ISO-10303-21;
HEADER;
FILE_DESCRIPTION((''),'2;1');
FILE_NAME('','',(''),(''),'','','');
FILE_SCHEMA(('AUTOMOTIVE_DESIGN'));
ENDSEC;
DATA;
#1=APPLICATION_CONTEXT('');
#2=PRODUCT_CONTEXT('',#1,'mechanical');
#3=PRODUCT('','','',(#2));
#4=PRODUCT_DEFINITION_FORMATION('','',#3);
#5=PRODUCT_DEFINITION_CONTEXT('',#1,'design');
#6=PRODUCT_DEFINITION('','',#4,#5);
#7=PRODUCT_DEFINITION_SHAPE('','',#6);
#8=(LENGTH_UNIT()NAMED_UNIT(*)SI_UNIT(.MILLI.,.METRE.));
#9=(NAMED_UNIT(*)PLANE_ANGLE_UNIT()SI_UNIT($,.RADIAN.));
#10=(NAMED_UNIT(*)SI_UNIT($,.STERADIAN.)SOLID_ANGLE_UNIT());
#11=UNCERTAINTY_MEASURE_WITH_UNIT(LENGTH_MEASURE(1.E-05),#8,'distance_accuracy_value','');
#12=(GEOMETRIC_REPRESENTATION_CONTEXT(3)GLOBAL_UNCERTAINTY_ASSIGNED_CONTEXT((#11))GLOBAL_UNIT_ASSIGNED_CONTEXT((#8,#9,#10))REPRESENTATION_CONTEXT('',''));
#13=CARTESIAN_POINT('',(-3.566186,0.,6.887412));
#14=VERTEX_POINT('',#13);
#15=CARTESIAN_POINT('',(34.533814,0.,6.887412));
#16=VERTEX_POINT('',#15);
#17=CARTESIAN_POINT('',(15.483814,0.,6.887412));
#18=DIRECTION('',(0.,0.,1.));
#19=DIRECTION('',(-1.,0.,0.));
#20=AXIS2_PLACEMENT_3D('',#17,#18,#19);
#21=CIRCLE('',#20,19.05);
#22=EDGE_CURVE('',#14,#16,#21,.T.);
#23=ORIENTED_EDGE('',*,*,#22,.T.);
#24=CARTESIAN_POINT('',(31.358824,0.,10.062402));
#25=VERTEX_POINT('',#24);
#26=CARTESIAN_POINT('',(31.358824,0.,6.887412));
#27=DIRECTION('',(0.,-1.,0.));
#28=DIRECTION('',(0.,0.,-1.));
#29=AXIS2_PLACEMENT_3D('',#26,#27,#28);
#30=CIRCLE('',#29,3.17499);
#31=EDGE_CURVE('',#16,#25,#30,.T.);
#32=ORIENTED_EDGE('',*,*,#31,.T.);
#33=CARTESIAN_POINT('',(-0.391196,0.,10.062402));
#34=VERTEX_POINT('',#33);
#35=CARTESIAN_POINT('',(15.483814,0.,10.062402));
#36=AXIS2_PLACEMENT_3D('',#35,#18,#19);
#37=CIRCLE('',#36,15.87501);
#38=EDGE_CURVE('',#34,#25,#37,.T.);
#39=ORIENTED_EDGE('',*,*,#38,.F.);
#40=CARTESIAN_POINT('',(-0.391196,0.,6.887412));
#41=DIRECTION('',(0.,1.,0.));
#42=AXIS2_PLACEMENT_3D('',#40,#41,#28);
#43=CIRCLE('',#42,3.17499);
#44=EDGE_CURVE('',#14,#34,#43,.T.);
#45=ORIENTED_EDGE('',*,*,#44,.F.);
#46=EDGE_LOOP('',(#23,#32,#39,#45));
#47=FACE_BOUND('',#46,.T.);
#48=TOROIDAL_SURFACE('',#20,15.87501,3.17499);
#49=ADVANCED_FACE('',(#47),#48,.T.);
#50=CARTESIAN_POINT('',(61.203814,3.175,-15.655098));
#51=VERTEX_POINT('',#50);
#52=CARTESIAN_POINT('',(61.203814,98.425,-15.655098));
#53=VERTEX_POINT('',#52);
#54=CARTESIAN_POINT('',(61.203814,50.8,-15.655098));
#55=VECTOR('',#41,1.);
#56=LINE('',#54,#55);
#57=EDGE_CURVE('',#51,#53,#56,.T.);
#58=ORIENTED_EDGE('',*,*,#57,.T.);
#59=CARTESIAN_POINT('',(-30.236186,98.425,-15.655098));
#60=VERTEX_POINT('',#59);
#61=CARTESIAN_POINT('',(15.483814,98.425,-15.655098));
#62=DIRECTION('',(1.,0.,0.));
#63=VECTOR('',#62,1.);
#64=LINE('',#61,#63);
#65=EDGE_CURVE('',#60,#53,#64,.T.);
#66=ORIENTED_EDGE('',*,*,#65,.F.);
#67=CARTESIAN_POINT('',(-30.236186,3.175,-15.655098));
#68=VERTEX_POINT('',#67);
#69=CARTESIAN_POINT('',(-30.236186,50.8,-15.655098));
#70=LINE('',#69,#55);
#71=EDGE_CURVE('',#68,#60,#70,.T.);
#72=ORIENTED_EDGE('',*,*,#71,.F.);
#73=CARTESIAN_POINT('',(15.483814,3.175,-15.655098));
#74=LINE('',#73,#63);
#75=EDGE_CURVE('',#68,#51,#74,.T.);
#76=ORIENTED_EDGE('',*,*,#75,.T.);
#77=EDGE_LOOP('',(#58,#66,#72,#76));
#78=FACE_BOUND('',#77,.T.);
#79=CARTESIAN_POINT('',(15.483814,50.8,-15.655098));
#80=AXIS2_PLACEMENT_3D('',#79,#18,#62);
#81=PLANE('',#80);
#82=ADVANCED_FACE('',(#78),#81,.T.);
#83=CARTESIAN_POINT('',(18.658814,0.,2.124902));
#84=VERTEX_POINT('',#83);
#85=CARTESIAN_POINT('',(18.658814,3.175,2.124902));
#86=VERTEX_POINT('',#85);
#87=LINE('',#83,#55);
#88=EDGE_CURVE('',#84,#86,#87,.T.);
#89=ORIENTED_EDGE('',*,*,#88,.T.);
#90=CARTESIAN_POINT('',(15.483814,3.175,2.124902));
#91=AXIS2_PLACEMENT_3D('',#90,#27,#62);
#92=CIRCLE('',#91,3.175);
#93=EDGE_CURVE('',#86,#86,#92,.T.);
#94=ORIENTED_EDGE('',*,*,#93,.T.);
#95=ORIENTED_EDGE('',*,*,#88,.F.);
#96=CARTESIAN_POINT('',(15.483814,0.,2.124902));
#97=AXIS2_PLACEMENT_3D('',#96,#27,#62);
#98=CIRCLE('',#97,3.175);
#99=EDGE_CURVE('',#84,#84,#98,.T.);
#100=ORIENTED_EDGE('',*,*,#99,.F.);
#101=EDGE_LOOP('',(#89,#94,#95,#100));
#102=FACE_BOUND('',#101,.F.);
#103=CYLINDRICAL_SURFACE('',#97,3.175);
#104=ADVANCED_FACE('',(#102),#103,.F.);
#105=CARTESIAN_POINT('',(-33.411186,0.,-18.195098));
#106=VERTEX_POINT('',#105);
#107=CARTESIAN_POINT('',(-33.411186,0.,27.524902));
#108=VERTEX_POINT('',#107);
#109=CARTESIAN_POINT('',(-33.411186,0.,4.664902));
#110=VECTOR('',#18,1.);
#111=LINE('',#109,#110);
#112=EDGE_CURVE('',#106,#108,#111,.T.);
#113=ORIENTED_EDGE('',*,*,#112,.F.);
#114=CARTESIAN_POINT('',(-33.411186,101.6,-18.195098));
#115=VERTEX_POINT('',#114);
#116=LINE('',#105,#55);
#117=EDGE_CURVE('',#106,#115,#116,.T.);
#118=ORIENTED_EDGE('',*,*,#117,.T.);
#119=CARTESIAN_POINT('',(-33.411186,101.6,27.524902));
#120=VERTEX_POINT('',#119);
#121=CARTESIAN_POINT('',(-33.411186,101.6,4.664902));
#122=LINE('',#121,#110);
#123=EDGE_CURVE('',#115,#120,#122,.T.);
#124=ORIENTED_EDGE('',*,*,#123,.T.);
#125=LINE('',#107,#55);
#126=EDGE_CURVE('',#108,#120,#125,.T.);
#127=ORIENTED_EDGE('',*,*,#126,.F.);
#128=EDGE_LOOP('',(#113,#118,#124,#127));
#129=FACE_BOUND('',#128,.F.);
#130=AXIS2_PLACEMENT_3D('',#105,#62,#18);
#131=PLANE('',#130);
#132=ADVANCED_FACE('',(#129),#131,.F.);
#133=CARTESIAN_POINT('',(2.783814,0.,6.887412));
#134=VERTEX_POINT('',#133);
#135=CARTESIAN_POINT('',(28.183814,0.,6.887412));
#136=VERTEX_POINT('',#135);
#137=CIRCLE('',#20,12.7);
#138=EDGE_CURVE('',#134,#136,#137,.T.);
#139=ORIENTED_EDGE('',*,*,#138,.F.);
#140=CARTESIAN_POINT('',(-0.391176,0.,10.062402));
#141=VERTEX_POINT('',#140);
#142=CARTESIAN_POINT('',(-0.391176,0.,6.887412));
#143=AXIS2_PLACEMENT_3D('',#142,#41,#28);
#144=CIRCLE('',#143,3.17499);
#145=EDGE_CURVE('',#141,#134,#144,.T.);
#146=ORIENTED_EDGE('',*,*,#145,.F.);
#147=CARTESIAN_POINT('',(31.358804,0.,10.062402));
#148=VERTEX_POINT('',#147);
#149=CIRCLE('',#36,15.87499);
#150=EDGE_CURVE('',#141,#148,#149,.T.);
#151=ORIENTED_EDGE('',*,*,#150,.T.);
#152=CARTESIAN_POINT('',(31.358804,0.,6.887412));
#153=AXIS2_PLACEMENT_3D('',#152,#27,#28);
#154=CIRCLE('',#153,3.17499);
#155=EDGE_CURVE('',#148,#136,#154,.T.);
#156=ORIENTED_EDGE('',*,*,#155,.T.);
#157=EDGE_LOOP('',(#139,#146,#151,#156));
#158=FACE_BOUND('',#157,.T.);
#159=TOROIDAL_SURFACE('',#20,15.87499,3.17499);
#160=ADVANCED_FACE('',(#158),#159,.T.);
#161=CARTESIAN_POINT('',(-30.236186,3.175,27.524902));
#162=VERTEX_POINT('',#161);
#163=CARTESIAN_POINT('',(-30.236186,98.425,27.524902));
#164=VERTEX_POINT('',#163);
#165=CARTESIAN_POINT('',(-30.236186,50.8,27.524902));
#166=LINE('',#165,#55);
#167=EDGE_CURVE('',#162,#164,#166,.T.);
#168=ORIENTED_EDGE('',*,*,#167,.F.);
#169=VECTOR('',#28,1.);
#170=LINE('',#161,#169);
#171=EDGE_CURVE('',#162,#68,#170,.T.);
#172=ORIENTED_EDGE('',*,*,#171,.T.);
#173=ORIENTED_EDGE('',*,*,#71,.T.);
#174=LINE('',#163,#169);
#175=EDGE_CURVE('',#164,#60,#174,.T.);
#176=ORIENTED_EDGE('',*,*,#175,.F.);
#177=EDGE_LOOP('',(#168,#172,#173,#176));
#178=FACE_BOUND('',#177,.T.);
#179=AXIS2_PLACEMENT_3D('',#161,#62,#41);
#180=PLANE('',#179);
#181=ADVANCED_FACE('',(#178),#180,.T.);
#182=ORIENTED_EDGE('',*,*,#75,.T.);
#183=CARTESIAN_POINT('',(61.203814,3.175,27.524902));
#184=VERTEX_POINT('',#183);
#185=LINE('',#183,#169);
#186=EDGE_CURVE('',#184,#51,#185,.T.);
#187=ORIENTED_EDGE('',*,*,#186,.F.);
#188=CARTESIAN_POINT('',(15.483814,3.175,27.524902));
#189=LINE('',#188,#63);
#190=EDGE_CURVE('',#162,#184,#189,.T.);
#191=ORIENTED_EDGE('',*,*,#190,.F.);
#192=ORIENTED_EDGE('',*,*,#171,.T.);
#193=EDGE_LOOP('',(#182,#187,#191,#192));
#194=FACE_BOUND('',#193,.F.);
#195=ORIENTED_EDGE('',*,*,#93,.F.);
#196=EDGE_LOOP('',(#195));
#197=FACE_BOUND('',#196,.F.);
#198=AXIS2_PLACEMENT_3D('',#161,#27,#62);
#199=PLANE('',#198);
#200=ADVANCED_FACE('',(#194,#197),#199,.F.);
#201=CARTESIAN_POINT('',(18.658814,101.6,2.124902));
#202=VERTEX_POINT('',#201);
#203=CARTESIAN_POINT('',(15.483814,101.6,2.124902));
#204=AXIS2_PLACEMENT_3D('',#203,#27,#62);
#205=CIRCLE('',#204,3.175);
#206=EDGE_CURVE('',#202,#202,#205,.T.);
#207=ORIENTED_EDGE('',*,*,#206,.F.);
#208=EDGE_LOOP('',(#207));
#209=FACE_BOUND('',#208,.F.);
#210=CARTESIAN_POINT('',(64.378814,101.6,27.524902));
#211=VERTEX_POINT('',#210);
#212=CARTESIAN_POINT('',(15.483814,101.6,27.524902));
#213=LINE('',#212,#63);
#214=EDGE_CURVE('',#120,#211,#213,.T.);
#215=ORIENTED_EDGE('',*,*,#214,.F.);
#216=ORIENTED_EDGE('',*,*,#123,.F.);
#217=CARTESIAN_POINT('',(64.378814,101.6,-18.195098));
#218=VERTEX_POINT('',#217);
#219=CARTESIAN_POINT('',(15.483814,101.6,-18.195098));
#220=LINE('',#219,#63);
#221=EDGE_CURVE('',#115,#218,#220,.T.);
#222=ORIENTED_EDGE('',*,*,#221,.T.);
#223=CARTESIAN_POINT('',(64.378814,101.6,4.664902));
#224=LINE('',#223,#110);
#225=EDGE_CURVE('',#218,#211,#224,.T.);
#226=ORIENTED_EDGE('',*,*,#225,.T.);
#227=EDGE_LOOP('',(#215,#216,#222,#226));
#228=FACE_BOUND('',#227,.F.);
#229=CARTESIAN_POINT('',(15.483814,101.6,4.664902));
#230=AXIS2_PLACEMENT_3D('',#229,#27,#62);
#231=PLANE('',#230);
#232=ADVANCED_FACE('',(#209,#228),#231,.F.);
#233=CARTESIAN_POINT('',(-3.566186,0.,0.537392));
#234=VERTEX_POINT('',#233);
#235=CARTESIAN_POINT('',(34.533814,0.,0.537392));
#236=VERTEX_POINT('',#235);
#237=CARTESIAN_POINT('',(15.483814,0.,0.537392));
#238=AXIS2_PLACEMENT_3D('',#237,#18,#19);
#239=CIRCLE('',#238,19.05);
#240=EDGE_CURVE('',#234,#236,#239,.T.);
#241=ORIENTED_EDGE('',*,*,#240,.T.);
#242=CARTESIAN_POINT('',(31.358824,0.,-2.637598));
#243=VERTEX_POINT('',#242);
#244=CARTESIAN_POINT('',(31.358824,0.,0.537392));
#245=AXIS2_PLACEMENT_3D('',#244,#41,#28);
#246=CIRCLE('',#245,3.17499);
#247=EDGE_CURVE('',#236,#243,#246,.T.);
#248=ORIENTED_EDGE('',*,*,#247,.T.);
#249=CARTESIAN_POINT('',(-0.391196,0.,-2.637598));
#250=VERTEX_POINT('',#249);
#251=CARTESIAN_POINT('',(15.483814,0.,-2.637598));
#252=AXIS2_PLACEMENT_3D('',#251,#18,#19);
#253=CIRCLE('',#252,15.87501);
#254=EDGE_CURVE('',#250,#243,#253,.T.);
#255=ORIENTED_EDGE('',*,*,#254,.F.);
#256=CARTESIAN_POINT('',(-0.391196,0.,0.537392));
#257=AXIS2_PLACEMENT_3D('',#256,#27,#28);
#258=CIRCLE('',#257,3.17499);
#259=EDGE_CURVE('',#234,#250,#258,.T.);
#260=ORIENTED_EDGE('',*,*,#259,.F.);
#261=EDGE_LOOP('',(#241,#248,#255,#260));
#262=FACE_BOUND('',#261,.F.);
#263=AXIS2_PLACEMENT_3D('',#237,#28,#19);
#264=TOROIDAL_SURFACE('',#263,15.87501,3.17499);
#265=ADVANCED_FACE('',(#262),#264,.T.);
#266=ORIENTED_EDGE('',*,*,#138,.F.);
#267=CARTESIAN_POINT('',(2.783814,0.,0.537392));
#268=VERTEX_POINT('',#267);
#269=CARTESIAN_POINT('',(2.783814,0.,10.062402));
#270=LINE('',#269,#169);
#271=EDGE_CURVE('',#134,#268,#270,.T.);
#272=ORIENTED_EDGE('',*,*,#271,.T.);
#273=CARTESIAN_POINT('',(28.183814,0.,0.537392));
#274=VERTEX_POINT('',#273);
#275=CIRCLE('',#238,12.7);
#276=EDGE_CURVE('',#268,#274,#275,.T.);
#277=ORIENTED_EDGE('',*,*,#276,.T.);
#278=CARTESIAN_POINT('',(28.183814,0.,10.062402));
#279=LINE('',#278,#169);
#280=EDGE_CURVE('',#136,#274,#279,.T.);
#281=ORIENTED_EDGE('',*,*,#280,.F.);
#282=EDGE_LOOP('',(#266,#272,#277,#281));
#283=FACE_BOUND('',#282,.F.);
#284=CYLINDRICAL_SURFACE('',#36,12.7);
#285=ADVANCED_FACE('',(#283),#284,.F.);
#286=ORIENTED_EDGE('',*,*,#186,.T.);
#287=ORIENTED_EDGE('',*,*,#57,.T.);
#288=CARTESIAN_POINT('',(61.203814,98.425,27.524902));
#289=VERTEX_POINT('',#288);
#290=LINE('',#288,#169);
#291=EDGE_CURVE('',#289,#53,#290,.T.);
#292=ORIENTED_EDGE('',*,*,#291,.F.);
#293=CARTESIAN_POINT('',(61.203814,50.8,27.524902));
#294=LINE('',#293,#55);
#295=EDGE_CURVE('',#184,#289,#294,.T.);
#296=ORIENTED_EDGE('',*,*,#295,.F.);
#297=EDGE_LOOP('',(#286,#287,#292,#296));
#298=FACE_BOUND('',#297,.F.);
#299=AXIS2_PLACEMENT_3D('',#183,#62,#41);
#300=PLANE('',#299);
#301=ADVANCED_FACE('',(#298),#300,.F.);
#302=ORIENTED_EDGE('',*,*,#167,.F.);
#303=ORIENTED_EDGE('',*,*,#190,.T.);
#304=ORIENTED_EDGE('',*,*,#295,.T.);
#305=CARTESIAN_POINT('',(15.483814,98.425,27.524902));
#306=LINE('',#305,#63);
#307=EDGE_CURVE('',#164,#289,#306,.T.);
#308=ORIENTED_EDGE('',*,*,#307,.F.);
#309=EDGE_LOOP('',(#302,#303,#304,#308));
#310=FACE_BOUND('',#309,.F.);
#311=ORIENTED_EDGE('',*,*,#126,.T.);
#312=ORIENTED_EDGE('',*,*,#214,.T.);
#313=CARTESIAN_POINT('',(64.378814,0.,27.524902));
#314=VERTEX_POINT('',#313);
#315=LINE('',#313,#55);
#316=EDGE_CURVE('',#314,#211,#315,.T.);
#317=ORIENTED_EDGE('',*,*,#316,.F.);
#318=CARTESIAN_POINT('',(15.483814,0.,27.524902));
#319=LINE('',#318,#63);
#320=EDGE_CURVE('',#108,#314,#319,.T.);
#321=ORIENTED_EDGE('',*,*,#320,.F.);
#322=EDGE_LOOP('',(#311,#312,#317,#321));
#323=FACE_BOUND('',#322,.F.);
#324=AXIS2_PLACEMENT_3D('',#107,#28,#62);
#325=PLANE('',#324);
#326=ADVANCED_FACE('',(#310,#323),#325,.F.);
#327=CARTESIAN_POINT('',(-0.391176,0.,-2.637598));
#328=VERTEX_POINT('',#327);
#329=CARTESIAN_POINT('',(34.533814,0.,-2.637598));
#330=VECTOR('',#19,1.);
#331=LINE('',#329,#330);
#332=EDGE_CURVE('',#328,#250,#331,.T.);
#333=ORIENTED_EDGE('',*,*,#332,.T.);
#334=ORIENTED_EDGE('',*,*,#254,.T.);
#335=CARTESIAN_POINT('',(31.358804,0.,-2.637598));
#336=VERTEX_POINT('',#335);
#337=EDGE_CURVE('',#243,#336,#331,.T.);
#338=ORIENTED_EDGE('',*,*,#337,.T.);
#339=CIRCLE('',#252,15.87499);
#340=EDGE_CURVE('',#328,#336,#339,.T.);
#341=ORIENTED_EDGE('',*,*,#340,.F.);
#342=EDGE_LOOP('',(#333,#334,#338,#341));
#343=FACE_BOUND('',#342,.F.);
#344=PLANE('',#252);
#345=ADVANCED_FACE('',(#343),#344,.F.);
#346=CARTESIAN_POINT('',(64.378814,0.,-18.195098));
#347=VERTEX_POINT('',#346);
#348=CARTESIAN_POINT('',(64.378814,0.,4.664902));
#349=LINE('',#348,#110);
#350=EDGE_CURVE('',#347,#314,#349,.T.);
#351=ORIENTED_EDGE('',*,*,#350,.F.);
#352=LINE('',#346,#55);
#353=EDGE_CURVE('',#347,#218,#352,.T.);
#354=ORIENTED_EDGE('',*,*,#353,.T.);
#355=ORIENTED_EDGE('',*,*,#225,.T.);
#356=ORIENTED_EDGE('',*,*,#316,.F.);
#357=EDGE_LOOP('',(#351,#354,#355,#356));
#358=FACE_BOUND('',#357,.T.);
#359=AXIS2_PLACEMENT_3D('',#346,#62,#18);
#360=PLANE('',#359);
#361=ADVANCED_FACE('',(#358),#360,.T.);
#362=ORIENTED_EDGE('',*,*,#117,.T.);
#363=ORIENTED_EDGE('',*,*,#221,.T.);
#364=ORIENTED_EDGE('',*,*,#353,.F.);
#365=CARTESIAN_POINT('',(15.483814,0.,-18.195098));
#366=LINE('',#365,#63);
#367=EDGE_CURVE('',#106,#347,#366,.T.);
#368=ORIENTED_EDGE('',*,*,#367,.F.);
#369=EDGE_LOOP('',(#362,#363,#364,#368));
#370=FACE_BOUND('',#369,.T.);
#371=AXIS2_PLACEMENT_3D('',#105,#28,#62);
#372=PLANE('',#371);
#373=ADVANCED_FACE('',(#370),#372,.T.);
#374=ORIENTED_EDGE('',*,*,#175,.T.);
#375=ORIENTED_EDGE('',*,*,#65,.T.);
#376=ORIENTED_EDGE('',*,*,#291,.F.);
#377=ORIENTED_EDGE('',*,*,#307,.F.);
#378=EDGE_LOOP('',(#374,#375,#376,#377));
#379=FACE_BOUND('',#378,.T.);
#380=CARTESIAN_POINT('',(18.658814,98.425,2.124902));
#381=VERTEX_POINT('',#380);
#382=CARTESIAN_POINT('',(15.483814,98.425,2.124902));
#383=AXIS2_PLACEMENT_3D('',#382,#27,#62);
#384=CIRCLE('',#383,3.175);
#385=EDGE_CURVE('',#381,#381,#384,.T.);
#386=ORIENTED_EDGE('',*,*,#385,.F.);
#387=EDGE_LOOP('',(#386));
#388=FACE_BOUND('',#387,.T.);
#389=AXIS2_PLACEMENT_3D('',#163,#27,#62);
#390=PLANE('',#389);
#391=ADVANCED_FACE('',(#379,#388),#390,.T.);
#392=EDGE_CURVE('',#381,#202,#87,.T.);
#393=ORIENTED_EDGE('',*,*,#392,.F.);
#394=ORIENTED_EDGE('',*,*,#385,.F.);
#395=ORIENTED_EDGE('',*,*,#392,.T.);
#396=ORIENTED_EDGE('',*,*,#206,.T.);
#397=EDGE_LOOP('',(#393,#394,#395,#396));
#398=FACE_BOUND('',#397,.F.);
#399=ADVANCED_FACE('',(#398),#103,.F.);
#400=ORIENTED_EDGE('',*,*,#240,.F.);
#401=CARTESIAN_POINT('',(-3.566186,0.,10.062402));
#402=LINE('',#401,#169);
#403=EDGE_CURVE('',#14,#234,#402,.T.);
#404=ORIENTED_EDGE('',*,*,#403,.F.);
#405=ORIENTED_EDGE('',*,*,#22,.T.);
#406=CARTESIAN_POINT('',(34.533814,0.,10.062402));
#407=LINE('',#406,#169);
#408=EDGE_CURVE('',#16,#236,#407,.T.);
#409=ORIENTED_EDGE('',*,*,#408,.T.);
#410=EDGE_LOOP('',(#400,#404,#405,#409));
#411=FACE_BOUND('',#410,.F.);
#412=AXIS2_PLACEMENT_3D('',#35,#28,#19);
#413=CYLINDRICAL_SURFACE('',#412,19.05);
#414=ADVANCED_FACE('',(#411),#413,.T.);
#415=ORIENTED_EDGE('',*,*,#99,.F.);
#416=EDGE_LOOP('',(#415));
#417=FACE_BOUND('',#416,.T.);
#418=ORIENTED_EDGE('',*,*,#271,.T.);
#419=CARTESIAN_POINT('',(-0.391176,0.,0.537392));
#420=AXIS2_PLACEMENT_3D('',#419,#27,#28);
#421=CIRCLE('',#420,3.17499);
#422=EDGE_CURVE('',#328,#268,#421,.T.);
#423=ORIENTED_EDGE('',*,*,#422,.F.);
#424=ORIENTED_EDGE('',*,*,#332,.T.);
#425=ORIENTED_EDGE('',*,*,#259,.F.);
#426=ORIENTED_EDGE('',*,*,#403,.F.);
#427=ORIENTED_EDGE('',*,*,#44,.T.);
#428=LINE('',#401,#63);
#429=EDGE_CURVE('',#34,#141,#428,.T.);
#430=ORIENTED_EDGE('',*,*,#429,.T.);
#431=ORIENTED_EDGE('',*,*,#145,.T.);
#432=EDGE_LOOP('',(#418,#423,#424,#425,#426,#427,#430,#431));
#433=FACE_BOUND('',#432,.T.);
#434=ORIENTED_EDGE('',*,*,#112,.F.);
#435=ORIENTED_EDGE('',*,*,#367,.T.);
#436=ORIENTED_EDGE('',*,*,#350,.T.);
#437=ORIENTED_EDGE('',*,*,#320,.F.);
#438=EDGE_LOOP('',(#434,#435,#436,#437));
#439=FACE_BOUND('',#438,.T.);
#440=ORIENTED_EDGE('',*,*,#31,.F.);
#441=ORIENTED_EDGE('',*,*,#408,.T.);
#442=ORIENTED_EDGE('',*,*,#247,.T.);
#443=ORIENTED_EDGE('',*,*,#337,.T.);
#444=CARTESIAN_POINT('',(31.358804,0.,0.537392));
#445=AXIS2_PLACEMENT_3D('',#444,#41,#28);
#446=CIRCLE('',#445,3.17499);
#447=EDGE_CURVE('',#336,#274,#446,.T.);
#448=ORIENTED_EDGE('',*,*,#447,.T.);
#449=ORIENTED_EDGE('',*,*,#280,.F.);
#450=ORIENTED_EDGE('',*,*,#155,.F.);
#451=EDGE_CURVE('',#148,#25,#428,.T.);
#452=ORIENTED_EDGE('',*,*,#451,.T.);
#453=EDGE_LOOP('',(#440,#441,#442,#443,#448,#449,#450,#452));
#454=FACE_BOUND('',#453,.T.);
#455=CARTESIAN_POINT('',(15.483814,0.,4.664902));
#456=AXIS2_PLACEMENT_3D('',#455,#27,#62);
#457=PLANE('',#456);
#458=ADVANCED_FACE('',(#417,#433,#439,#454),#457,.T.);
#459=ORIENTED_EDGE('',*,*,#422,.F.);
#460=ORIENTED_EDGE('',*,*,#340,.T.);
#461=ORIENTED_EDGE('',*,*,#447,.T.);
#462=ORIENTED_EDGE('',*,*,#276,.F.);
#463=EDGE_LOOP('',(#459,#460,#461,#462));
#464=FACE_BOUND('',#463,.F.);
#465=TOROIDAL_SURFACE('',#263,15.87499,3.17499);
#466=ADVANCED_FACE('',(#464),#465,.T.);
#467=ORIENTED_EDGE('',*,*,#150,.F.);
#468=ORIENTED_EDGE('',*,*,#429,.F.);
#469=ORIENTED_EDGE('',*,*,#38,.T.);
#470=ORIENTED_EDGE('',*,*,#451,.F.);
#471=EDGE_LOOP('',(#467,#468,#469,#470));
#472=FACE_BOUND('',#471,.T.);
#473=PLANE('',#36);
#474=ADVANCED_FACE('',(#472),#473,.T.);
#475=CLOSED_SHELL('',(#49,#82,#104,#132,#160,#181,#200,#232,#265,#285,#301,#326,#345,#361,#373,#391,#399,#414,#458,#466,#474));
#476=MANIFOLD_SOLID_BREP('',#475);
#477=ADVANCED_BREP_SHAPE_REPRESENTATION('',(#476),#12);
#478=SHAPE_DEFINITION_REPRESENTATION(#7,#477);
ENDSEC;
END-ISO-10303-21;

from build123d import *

# Parameters (mm, degrees)
F0_W      = 97.79
F0_H      = 45.72
F1_DEPTH  = 101.6
F2_W      = 91.44
F2_H      = 95.25
F3_DEPTH  = 43.18
F4_W      = 19.05
F4_H      = 6.35
F5_ANGLE  = 180
F7_DEPTH  = 25.4
F8_R      = 3.17499
F10_D     = 6.35
F10_DEPTH = 101.601


# Not quite as in the source:
# - a fillet or chamfer is up to 0.001 mm smaller than in the source, because OpenCascade refuses the exact size


with BuildPart() as f1:
    # F0 (on Front) → F1 (new body)
    with BuildSketch(Plane.XZ):
        with Locations((15.4838143581, 4.6649015626)):
            Rectangle(F0_W, F0_H)
    extrude(amount=-F1_DEPTH)

    # F2 (on face) → F3 (cut)
    with BuildSketch(Plane.XY.offset(27.5249015626)):
        with Locations((15.4838143581, 50.8)):
            Rectangle(F2_W, F2_H)
    extrude(amount=-F3_DEPTH, mode=Mode.SUBTRACT)

    # F4 (on face) → F5 (revolve)
    with BuildSketch(Plane.XZ):
        with Locations((5.9588143581, 6.8874015626)):
            Rectangle(F4_W, F4_H)
        with Locations((5.9588143581, 0.5374015626)):
            Rectangle(F4_W, F4_H)
    revolve(axis=Axis((15.4838143581, 0, 3.7124015626), (0, 0, 1)), revolution_arc=F5_ANGLE)

    # F6 (on face) → F7 (cut)
    with BuildSketch(Plane.XY.offset(10.0624015626)):
        with BuildLine():
            Line((28.1838143581, 0), (2.7838143581, 0))
            ThreePointArc((2.7838143581, 0), (15.4838143581, -12.7), (28.1838143581, 0))
        make_face()
    extrude(amount=-F7_DEPTH, mode=Mode.SUBTRACT)

    # F8 (radius 3.175 in the source; OpenCascade refuses exactly that, so slightly less here)
    f8_edges = [f1.edges().sort_by_distance(p)[0] for p in [
        (15.483814, -19.05, 10.062402),
        (15.483814, -12.7, 10.062402),
        (15.483814, -19.05, -2.637598),
        (15.483814, -12.7, -2.637598),
    ]]
    fillet(f8_edges, radius=F8_R)

    # F10 (through all, one way)
    with BuildSketch(Plane.XZ):
        with Locations((15.4838143581, 2.1249015626)):
            Circle(F10_D / 2)
    extrude(amount=-F10_DEPTH, mode=Mode.SUBTRACT)


solid = f1.part
